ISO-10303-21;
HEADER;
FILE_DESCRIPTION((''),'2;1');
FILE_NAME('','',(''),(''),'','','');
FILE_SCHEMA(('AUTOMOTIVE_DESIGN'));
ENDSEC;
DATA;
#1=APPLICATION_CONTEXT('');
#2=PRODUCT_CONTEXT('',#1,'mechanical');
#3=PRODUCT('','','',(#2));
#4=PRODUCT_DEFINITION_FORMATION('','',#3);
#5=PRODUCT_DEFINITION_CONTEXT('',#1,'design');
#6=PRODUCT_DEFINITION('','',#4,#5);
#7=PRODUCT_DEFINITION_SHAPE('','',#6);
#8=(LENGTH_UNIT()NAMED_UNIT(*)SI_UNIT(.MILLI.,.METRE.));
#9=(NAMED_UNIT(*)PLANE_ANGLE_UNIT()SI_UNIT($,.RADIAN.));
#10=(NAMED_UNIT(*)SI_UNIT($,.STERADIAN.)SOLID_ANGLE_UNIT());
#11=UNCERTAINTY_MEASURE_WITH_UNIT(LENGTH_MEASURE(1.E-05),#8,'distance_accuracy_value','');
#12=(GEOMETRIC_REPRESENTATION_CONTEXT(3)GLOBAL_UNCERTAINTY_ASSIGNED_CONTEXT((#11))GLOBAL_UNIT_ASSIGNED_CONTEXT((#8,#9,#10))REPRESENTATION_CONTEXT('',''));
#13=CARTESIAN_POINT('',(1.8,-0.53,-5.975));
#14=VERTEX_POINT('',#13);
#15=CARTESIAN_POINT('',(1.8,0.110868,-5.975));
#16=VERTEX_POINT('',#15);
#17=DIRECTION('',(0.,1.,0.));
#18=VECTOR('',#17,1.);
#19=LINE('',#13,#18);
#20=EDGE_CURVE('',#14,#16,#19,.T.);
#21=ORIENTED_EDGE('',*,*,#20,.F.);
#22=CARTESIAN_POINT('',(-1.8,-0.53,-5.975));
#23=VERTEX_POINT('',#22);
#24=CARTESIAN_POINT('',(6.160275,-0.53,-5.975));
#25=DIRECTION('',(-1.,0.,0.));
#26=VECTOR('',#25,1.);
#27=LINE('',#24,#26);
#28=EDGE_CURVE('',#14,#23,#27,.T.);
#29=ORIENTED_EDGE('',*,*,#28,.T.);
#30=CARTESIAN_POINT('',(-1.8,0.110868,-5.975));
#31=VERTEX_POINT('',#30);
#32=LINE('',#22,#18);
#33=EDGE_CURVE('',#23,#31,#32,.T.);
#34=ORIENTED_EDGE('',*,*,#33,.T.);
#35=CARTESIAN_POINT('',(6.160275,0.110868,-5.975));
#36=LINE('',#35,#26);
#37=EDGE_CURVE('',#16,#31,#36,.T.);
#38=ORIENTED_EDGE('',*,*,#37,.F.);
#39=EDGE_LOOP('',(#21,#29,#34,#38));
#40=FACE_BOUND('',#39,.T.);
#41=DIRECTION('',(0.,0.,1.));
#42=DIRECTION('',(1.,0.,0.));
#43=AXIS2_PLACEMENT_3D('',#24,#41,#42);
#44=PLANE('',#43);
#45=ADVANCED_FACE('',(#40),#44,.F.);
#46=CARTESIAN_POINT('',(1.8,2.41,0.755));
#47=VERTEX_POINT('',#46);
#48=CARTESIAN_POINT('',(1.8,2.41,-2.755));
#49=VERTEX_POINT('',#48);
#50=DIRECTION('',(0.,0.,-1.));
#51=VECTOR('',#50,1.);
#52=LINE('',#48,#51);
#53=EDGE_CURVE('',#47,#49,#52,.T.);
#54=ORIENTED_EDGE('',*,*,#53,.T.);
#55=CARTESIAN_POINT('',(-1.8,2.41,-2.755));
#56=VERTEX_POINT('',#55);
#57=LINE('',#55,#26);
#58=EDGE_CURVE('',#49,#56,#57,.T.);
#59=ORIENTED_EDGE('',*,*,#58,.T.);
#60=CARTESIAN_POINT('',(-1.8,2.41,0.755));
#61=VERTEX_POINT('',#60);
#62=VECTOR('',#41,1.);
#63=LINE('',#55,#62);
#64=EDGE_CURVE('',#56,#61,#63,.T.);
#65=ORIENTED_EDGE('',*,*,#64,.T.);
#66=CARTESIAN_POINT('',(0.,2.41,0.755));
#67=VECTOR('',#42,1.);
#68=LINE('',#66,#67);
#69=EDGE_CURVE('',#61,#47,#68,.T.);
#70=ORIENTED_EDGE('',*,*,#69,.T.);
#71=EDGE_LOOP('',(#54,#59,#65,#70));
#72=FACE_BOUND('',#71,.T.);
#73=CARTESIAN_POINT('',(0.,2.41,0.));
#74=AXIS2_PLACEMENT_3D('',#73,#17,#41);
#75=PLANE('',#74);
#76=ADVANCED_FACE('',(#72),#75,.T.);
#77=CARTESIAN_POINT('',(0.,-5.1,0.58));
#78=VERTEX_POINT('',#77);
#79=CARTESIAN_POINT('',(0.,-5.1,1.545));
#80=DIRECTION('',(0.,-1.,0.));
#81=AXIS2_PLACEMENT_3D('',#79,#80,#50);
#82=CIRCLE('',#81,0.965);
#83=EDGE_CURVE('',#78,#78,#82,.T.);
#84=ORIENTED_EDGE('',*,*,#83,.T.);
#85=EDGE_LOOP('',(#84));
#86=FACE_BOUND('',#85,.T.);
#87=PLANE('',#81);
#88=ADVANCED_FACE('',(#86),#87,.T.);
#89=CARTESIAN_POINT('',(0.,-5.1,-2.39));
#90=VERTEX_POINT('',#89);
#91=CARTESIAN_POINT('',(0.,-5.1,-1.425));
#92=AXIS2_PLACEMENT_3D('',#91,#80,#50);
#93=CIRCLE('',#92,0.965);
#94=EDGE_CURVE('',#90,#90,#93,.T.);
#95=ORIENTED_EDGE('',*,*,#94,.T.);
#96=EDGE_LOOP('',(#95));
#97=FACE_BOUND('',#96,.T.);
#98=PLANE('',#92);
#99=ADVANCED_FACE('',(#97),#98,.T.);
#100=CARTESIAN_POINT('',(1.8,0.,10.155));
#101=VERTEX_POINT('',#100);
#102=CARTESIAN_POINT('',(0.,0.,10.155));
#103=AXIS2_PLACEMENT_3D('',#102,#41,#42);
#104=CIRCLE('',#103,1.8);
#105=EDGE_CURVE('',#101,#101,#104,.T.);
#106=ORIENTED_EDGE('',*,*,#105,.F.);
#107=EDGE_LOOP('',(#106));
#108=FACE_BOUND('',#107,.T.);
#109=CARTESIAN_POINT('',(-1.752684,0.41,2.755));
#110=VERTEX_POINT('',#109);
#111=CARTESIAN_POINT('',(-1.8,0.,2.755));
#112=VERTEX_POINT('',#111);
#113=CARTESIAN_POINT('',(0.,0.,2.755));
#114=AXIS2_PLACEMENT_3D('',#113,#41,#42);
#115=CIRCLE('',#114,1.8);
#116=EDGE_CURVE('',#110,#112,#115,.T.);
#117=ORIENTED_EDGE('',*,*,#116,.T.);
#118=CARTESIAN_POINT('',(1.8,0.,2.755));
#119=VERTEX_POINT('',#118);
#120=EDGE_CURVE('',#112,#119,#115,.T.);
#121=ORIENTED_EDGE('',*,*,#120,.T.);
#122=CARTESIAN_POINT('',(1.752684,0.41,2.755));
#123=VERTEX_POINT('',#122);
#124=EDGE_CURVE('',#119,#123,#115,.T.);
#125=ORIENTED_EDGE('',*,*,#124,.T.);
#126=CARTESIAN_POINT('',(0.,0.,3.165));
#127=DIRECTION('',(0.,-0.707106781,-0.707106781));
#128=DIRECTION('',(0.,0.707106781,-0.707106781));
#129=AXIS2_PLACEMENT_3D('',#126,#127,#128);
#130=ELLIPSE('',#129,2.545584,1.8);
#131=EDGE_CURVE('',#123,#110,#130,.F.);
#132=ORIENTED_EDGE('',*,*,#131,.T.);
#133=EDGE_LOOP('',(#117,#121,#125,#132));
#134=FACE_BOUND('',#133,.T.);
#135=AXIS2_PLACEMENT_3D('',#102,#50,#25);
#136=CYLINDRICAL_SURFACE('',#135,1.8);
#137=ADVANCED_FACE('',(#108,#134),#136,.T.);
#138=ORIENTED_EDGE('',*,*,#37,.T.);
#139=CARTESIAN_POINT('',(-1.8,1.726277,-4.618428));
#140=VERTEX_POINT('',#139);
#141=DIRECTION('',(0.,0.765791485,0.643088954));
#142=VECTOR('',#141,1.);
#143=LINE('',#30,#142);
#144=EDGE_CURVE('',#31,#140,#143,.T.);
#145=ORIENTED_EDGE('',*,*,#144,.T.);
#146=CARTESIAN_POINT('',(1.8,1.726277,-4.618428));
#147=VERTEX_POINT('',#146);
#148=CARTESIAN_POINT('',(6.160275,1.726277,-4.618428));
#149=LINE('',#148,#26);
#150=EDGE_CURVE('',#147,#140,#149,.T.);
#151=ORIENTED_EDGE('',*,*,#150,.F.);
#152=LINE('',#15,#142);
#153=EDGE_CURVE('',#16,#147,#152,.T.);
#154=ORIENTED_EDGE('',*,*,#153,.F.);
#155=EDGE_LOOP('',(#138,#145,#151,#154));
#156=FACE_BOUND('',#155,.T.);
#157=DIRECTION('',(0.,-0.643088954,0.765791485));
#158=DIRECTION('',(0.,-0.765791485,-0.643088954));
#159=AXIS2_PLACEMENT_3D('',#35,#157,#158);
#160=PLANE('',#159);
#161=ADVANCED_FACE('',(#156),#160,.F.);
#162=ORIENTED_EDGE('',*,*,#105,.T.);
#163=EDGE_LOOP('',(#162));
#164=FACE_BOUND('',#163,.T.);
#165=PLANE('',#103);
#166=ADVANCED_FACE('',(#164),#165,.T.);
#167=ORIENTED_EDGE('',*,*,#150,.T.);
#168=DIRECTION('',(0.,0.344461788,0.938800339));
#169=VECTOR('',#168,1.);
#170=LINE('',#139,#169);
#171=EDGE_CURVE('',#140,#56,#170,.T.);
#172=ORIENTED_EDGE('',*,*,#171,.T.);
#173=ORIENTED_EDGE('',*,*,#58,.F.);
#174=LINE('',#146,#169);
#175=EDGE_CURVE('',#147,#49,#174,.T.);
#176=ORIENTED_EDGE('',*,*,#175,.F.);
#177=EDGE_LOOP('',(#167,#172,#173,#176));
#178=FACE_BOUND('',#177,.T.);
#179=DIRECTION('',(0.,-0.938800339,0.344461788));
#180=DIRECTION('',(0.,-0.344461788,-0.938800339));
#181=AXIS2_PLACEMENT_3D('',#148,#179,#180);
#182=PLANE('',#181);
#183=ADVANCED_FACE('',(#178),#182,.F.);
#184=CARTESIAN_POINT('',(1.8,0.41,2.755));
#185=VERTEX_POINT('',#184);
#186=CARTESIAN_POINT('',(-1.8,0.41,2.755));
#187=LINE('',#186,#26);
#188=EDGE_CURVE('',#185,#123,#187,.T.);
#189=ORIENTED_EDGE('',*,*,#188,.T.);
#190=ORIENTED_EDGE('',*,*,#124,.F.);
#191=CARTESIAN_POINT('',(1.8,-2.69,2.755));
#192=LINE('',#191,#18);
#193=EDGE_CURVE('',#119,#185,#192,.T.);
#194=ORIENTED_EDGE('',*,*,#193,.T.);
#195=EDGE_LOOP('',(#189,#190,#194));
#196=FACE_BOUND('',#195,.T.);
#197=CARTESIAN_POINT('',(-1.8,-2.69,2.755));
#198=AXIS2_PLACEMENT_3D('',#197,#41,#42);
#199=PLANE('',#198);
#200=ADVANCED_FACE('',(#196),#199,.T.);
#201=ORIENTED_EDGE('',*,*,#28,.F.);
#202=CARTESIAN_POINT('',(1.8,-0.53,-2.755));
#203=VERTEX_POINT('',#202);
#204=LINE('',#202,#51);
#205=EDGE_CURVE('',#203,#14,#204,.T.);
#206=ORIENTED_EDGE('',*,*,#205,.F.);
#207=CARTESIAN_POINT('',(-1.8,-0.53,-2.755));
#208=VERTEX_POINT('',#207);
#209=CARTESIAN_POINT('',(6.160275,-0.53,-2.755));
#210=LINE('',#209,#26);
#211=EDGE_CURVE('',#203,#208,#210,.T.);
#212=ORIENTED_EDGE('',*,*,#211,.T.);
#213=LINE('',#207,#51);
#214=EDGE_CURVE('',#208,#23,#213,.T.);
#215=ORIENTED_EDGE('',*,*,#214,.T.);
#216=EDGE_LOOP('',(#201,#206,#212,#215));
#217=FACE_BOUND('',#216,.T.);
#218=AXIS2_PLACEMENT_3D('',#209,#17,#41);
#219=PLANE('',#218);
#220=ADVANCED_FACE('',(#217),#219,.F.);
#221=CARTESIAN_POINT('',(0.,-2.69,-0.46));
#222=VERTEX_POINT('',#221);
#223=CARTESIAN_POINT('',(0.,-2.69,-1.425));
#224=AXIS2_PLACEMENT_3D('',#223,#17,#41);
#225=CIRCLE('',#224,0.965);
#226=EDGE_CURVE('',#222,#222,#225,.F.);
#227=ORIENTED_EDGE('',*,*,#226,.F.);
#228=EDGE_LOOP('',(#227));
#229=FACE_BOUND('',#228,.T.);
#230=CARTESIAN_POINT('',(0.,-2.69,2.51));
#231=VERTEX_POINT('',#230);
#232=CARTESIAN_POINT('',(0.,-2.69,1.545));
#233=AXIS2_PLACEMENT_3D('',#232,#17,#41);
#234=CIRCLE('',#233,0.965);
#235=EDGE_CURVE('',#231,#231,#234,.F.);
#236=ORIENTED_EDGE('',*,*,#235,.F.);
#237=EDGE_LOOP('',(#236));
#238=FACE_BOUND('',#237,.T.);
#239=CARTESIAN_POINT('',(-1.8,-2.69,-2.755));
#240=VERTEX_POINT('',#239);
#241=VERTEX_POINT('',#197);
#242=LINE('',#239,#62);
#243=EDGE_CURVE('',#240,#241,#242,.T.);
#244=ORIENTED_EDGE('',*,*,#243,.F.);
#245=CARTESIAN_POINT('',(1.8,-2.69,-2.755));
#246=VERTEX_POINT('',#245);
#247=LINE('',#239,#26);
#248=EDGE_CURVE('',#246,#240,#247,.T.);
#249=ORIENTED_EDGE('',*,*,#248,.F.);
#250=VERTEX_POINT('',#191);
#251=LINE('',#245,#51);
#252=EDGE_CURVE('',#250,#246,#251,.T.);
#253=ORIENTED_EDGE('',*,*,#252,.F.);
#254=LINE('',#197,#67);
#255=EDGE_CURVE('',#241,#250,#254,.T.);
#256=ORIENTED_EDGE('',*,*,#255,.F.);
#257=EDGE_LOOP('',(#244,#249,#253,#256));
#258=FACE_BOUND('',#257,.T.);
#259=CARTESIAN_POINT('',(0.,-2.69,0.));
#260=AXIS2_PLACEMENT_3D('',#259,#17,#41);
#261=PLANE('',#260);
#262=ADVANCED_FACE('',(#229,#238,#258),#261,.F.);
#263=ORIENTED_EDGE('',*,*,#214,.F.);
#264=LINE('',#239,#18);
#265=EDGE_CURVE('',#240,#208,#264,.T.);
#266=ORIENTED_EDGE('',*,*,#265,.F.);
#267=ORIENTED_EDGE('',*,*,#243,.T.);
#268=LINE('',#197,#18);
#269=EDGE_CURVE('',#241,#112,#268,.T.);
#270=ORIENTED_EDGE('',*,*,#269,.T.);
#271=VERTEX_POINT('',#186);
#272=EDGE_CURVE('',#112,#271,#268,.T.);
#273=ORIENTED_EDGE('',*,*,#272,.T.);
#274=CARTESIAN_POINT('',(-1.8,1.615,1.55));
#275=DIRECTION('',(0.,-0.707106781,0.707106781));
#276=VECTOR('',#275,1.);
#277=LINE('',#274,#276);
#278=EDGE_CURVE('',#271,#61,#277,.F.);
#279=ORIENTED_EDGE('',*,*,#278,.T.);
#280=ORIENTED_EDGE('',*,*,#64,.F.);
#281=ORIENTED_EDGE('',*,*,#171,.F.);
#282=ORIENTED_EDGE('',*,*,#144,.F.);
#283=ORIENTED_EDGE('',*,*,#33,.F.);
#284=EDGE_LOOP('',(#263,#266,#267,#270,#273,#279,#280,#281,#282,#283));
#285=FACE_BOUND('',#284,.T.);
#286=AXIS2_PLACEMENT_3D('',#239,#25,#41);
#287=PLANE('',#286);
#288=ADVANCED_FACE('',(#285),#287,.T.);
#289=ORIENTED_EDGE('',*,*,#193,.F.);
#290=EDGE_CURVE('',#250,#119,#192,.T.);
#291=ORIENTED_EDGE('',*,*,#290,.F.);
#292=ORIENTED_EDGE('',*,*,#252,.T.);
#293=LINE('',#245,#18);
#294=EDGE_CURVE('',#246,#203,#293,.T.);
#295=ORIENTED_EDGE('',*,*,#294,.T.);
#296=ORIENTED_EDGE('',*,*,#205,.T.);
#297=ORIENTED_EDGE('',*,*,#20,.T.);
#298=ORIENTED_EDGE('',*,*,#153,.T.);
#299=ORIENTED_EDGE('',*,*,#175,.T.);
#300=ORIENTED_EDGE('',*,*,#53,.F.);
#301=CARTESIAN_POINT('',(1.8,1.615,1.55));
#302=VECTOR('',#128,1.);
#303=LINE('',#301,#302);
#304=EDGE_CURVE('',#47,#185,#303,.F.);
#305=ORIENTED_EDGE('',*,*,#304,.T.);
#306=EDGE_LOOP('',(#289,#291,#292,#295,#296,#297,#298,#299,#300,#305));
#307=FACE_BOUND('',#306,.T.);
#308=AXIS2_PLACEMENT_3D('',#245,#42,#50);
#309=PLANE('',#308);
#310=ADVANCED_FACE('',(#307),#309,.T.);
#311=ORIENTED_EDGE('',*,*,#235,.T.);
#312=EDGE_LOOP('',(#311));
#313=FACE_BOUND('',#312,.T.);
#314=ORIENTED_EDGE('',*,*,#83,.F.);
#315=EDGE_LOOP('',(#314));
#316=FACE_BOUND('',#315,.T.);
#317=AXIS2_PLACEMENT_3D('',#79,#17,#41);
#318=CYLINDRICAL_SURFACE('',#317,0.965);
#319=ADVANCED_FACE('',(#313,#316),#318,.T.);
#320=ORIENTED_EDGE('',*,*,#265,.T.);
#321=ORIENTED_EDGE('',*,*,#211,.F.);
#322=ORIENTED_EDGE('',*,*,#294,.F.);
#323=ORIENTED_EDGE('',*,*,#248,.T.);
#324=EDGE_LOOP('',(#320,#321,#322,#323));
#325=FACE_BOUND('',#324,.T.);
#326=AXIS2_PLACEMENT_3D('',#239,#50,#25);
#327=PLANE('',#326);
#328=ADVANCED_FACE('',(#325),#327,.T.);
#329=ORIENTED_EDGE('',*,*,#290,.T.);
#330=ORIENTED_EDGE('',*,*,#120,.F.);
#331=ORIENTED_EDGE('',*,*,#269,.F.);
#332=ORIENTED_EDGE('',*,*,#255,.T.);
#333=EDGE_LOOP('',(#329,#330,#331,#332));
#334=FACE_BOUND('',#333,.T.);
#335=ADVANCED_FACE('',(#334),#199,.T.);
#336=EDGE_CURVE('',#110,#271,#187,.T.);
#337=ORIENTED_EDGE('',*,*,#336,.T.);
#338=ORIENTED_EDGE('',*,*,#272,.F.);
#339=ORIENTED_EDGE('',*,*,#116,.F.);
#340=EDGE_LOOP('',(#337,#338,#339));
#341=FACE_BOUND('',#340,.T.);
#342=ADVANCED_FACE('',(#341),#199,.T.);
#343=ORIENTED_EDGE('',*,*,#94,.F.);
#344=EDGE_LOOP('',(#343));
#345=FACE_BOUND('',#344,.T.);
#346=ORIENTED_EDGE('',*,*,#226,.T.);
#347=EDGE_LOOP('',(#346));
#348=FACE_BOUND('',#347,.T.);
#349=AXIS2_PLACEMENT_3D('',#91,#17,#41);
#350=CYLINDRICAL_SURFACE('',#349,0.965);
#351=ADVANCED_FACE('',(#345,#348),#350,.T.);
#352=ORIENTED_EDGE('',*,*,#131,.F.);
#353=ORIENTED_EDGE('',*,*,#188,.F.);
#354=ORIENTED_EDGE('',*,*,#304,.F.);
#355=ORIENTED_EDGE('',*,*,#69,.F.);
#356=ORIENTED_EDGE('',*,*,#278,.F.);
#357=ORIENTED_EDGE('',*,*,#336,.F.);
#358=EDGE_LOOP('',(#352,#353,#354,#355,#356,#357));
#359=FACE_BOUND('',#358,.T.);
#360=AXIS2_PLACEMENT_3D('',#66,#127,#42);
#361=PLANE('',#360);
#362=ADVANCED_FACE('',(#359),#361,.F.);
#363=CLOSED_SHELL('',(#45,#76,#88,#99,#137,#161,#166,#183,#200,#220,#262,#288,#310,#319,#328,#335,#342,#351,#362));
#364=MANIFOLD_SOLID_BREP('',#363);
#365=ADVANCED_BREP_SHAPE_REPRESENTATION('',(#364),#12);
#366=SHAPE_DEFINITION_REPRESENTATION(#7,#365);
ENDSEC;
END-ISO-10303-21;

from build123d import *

# Parameters (mm, degrees)
BOSS_EXTRUDE1_DEPTH             = 2.41
BOSS_EXTRUDE1_DEPTH_BACK        = 2.69
SKETCH1_W                       = 3.6
SKETCH1_H                       = 5.51
SKETCH2_R                       = 1.8
BOSS_EXTRUDE2_DEPTH             = 7.4
SKETCH3_R                       = 0.965
BOSS_EXTRUDE3_DEPTH             = 2.41
BOSS_EXTRUDE4_REACH             = 13.505
BOSS_EXTRUDE4_DIRECTION_2_REACH = 13.505
CHAMFER1_SIZE                   = 2


with BuildPart() as part:
    # Sketch1 → Boss-Extrude1 (new, two sides: drawn at the far end of the back side and taken through both)
    with BuildSketch(Plane(origin=(0, 0, 0), x_dir=(1, 0, 0), z_dir=(0, 1, 0)).offset(-BOSS_EXTRUDE1_DEPTH_BACK)):
        Rectangle(SKETCH1_W, SKETCH1_H)
    extrude(amount=BOSS_EXTRUDE1_DEPTH + BOSS_EXTRUDE1_DEPTH_BACK)

    # Sketch2 → Boss-Extrude2 (add)
    with BuildSketch(Plane.XY.offset(2.755)):
        Circle(SKETCH2_R)
    extrude(amount=BOSS_EXTRUDE2_DEPTH)

    # Sketch3 → Boss-Extrude3 (add)
    with BuildSketch(Plane.XZ.offset(2.69)):
        with Locations(Location((0, 1.545, 0), (0, 0, 90))):
            Circle(SKETCH3_R)
        with Locations(Location((0, -1.425, 0), (0, 0, 90))):
            Circle(SKETCH3_R)
    extrude(amount=BOSS_EXTRUDE3_DEPTH)

    # Boss-Extrude4: up to this face of the body (flat: up to its plane)
    boss_extrude4_end = Plane(part.part.faces().sort_by_distance((1.8, -0.14, 0))[0])
    # Sketch4 → Boss-Extrude4 (add, up to the picked face)
    with BuildSketch(Plane(origin=(0, 0, 0), x_dir=(0, 0, -1), z_dir=(1, 0, 0)), mode=Mode.PRIVATE) as boss_extrude4_sk1:
        Polygon((2.755, -0.53), (5.975, -0.53), (5.975, 0.110868038), (4.618427758, 1.726276708), (2.755, 2.41), align=None)
    boss_extrude4_tool1 = split(extrude(boss_extrude4_sk1.sketch, amount=BOSS_EXTRUDE4_REACH, mode=Mode.PRIVATE), bisect_by=boss_extrude4_end, keep=Keep.BOTH, mode=Mode.PRIVATE)
    add(boss_extrude4_tool1.solids().sort_by(Axis((0, 0.630129, -4.086068), (1, 0, 0)))[0])

    # Boss-Extrude4 direction 2: up to this face of the body (flat: up to its plane)
    boss_extrude4_direction_2_end = Plane(part.part.faces().sort_by_distance((-1.8, -0.14, 0))[0])
    # Sketch4 → Boss-Extrude4 direction 2 (add, up to the picked face)
    with BuildSketch(Plane(origin=(0, 0, 0), x_dir=(0, 0, -1), z_dir=(1, 0, 0)), mode=Mode.PRIVATE) as boss_extrude4_direction_2_sk1:
        Polygon((2.755, -0.53), (5.975, -0.53), (5.975, 0.110868038), (4.618427758, 1.726276708), (2.755, 2.41), align=None)
    boss_extrude4_direction_2_tool1 = split(extrude(boss_extrude4_direction_2_sk1.sketch, amount=-BOSS_EXTRUDE4_DIRECTION_2_REACH, mode=Mode.PRIVATE), bisect_by=boss_extrude4_direction_2_end, keep=Keep.BOTH, mode=Mode.PRIVATE)
    add(boss_extrude4_direction_2_tool1.solids().sort_by(Axis((0, 0.630129, -4.086068), (-1, 0, 0)))[0])

    # Chamfer1
    # the kernel refuses this chamfer: 2 mm, written as the material it takes off along each edge
    with BuildSketch(Plane(origin=(6.943365976, 2.41, 2.755), x_dir=(0, -0.9996219169112968, 0.02749587661058627), z_dir=(-1, 0, 0))) as chamfer1_piece_1_section:
        Polygon((CHAMFER1_SIZE * 0.999621916911, -CHAMFER1_SIZE * 0.0274958766106), (-CHAMFER1_SIZE * 0.0274958766106, -CHAMFER1_SIZE * 0.999621916911), (0, 0), align=None)
    chamfer1_piece_1 = extrude(amount=13.886731952, mode=Mode.PRIVATE)
    chamfer1_piece_1 = chamfer1_piece_1 - Plane(origin=(0, 0, 2.480910963), x_dir=(1, 0, 0), z_dir=(0, 0, -1)) * Cylinder(1.8, 36, mode=Mode.PRIVATE)
    add(chamfer1_piece_1, mode=Mode.SUBTRACT)


solid = part.part
